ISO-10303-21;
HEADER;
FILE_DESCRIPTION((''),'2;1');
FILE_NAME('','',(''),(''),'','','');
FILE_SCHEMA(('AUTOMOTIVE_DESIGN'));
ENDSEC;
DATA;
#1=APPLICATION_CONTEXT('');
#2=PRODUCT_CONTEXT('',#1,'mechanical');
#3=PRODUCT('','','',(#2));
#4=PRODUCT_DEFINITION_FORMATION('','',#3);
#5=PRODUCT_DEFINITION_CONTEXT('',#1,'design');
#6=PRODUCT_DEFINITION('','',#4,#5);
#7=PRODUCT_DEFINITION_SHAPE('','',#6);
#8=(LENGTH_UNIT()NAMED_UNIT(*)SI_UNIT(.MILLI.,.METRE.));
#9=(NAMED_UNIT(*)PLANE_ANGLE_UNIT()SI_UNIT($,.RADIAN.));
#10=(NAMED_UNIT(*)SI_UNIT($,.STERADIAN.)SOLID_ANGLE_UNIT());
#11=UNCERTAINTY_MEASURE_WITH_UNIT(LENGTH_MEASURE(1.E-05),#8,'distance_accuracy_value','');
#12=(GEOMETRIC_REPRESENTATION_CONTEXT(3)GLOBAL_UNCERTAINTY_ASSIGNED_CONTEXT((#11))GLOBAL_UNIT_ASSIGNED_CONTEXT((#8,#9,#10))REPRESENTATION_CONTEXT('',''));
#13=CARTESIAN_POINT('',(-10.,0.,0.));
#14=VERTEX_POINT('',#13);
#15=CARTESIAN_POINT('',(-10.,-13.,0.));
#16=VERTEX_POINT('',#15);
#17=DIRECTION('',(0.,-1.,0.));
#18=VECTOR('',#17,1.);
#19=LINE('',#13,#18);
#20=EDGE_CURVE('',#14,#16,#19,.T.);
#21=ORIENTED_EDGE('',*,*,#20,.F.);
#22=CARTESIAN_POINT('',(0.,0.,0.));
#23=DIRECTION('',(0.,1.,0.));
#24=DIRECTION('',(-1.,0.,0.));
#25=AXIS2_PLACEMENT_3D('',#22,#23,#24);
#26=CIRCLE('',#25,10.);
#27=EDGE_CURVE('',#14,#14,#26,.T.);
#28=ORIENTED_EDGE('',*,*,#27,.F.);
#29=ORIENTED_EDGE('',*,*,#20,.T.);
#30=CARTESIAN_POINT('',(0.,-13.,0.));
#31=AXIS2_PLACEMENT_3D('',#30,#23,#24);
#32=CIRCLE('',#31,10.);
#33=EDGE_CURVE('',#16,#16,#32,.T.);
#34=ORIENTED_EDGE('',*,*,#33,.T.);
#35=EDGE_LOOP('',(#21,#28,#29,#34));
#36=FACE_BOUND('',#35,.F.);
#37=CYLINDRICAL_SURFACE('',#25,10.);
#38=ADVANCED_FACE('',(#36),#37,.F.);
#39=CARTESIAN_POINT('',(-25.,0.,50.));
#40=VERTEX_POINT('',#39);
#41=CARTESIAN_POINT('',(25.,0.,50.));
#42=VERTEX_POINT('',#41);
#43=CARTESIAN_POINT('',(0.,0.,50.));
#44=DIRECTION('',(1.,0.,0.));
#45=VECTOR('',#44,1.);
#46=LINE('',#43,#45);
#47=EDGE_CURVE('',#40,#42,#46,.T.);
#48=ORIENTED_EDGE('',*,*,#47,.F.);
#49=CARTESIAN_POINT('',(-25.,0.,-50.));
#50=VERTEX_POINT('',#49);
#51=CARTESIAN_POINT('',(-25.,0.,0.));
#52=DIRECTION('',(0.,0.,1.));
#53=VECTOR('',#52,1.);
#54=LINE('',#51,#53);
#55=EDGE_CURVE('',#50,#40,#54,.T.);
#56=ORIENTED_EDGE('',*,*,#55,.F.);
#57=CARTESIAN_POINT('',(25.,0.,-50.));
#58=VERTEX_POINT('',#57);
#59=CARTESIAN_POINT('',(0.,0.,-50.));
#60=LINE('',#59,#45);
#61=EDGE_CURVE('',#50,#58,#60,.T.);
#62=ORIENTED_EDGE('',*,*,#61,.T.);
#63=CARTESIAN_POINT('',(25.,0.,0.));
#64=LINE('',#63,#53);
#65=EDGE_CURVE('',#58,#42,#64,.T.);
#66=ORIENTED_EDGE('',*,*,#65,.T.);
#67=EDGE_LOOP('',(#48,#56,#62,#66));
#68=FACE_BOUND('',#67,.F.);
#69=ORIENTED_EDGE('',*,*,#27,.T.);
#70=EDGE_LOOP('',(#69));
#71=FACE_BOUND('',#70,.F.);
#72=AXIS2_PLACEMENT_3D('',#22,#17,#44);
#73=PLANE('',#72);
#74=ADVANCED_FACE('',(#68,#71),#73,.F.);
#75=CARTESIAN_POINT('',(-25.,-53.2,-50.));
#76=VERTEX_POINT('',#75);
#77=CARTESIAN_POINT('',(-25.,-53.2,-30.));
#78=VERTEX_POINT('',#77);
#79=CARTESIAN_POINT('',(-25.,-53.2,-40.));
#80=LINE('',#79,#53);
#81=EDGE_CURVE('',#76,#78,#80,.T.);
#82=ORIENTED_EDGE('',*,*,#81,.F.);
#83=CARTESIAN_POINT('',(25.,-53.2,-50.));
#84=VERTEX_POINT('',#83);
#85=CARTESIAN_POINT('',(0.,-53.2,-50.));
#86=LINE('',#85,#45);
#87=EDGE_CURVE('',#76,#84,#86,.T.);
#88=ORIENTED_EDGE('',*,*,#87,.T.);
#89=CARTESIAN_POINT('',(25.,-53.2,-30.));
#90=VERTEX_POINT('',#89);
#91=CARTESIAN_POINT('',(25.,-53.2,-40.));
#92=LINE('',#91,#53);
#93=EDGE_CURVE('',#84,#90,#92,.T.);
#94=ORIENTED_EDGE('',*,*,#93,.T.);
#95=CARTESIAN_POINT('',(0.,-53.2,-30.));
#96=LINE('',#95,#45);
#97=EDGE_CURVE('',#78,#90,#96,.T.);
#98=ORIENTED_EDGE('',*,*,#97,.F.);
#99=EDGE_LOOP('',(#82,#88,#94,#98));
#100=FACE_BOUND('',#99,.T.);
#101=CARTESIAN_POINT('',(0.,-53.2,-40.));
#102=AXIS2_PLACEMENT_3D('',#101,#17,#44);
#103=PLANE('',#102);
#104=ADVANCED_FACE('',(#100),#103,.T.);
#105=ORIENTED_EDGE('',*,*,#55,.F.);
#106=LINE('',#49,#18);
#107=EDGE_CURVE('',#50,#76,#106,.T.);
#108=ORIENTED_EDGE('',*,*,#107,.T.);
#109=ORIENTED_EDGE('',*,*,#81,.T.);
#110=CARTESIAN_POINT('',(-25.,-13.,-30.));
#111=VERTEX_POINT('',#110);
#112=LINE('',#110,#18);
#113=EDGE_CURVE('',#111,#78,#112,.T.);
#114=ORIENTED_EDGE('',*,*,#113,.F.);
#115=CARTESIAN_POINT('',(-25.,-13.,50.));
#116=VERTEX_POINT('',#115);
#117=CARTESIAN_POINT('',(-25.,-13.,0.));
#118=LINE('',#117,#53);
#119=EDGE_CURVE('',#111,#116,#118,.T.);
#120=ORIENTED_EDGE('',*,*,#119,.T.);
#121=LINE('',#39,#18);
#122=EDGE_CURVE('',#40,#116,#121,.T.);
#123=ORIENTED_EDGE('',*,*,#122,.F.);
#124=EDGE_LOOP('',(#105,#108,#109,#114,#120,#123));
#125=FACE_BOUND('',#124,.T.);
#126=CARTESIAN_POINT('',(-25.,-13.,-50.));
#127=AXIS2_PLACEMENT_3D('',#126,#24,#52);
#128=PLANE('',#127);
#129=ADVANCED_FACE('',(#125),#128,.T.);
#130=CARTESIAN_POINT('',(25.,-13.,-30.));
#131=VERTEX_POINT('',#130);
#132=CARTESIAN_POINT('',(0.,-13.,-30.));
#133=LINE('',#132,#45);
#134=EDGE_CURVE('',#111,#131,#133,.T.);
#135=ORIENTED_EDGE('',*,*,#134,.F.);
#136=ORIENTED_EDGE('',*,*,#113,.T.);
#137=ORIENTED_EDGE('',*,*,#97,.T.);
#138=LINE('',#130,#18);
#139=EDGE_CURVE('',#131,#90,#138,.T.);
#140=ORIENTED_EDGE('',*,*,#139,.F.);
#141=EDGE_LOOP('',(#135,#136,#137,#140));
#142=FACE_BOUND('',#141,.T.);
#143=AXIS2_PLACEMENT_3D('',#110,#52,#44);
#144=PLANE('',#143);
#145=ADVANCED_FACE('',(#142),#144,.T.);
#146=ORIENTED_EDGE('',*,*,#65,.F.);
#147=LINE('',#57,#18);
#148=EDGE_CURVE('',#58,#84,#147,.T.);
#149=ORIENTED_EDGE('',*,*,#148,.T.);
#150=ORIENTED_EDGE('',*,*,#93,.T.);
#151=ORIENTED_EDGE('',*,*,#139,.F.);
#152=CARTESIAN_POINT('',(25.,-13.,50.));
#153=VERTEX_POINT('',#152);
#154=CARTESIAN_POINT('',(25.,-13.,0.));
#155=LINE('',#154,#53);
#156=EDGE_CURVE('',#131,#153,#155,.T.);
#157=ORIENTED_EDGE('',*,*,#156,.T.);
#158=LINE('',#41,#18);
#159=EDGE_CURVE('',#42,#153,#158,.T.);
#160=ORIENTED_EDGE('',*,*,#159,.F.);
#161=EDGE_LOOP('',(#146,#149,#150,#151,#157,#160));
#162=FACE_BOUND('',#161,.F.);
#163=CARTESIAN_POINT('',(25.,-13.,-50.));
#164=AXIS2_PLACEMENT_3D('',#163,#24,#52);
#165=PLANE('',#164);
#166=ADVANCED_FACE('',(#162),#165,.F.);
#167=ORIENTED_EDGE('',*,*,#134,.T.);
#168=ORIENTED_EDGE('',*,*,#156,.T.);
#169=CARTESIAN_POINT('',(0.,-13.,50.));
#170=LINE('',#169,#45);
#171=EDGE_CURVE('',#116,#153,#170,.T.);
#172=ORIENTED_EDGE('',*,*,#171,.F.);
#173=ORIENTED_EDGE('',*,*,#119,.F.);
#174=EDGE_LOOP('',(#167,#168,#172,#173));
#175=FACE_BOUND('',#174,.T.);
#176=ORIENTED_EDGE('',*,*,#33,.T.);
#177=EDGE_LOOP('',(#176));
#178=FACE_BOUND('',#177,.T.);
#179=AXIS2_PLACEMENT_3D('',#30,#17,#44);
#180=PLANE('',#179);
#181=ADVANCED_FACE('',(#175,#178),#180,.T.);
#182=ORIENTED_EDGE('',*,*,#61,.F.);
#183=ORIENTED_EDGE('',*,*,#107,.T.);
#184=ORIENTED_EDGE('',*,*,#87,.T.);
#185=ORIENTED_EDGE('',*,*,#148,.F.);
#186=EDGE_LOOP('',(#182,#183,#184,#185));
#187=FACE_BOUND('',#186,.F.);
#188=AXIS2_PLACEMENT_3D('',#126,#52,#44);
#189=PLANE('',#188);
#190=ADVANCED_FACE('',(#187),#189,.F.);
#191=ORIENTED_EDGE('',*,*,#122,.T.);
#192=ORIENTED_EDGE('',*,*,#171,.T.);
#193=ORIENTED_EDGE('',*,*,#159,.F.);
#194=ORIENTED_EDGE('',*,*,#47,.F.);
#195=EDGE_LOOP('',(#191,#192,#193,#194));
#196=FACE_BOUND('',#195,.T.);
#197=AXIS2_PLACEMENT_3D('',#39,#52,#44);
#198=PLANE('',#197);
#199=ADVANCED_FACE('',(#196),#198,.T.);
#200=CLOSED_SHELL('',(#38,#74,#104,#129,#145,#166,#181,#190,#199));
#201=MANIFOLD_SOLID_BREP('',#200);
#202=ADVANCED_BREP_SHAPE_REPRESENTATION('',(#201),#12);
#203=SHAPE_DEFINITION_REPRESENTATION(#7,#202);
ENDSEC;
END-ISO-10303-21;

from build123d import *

# Parameters (mm, degrees)
F0_W     = 50
F0_H     = 100
F1_DEPTH = 13
F2_W     = 50
F2_H     = 20
F3_DEPTH = 40.2
F4_R     = 10
F5_DEPTH = 66.4


# Not quite as in the source:
# - a feature names something its author has since deleted; it is built from what else it names


with BuildPart() as f1:
    # F0 (on Front) → F1 (new body)
    with BuildSketch(Plane.XZ):
        Rectangle(F0_W, F0_H)
    extrude(amount=F1_DEPTH)

    # F2 (on face) → F3 (join)
    with BuildSketch(Plane.XZ.offset(13)):
        with Locations((0, -40)):
            Rectangle(F2_W, F2_H)
    extrude(amount=F3_DEPTH)

    # F4 (on face) → F5 (cut)
    with BuildSketch(Plane(origin=(0, 0, 0), x_dir=(-1, 0, 0), z_dir=(0, 1, 0))):
        Circle(F4_R)
    extrude(amount=-F5_DEPTH, mode=Mode.SUBTRACT)


solid = f1.part
